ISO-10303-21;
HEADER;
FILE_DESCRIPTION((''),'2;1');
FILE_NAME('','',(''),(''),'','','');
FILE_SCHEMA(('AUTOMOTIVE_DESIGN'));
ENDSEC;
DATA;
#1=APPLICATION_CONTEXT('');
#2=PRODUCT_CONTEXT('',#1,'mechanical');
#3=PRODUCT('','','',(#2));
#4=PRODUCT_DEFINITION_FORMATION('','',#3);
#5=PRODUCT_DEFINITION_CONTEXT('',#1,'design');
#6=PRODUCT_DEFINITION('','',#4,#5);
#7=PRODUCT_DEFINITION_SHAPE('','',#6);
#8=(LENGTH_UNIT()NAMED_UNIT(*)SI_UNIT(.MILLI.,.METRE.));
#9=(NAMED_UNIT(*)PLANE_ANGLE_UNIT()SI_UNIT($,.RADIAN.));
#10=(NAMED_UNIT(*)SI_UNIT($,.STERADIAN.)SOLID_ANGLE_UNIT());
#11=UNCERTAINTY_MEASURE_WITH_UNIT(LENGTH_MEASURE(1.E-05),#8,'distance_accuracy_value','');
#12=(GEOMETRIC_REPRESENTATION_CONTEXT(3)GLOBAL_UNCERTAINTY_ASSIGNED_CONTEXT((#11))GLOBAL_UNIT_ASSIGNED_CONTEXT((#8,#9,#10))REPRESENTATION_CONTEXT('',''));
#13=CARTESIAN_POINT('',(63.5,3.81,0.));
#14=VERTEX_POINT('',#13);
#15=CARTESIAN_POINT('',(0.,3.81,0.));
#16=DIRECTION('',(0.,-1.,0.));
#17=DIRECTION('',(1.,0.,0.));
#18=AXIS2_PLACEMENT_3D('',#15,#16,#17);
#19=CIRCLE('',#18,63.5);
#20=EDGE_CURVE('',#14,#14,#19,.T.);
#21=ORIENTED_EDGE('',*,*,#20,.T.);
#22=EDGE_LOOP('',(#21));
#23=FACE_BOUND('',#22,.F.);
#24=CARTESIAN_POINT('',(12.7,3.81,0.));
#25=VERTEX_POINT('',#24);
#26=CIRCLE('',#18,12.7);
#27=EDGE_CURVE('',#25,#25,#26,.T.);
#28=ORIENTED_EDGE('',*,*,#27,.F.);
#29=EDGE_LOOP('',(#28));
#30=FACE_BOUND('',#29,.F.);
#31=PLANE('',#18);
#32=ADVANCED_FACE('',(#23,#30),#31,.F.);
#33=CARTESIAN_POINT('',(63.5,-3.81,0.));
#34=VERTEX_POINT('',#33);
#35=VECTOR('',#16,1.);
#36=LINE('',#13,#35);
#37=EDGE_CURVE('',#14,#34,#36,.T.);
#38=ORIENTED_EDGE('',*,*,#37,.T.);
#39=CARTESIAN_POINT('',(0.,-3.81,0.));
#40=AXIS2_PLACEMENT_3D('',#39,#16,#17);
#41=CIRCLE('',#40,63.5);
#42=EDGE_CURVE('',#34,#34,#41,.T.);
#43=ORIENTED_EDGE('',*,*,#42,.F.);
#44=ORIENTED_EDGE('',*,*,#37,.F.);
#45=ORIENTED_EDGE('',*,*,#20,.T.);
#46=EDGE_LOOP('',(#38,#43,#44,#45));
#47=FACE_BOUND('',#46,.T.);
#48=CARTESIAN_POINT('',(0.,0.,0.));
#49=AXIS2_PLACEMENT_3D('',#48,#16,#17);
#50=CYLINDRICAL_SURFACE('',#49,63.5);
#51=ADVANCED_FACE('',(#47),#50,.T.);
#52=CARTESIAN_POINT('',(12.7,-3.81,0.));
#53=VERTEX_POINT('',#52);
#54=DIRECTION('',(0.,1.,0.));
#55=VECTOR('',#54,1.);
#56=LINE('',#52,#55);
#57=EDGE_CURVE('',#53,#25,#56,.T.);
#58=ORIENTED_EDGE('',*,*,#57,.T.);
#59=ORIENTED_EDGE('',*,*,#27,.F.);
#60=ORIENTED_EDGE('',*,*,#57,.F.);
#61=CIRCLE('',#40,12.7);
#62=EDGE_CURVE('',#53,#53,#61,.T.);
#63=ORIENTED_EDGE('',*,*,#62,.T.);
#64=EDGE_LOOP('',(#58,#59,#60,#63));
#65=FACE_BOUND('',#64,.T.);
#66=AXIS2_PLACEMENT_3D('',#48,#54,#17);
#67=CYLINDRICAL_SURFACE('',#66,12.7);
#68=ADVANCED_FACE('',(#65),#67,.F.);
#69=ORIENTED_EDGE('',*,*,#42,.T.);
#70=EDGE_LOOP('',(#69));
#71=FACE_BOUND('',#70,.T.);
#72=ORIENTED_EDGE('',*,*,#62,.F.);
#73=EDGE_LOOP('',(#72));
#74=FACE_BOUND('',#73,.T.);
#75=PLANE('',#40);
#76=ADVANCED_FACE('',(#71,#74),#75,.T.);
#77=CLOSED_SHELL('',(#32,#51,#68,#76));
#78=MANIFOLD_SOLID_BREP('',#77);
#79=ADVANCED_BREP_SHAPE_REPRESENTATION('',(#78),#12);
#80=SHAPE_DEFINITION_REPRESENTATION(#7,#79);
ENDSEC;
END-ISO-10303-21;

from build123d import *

# Parameters (mm, degrees)
F0_R     = 63.5
F0_R_2   = 12.7
F1_DEPTH = 3.81


# Not quite as in the source:
# - the program builds the solid bodies; features that only make, move or delete a surface that nothing else refers to are left out


with BuildPart() as f1:
    # F0 (on Front) → F1 (new body, symmetric)
    with BuildSketch(Plane.XZ):
        Circle(F0_R)
        Circle(F0_R_2, mode=Mode.SUBTRACT)
    extrude(amount=F1_DEPTH, both=True)


solid = f1.part
